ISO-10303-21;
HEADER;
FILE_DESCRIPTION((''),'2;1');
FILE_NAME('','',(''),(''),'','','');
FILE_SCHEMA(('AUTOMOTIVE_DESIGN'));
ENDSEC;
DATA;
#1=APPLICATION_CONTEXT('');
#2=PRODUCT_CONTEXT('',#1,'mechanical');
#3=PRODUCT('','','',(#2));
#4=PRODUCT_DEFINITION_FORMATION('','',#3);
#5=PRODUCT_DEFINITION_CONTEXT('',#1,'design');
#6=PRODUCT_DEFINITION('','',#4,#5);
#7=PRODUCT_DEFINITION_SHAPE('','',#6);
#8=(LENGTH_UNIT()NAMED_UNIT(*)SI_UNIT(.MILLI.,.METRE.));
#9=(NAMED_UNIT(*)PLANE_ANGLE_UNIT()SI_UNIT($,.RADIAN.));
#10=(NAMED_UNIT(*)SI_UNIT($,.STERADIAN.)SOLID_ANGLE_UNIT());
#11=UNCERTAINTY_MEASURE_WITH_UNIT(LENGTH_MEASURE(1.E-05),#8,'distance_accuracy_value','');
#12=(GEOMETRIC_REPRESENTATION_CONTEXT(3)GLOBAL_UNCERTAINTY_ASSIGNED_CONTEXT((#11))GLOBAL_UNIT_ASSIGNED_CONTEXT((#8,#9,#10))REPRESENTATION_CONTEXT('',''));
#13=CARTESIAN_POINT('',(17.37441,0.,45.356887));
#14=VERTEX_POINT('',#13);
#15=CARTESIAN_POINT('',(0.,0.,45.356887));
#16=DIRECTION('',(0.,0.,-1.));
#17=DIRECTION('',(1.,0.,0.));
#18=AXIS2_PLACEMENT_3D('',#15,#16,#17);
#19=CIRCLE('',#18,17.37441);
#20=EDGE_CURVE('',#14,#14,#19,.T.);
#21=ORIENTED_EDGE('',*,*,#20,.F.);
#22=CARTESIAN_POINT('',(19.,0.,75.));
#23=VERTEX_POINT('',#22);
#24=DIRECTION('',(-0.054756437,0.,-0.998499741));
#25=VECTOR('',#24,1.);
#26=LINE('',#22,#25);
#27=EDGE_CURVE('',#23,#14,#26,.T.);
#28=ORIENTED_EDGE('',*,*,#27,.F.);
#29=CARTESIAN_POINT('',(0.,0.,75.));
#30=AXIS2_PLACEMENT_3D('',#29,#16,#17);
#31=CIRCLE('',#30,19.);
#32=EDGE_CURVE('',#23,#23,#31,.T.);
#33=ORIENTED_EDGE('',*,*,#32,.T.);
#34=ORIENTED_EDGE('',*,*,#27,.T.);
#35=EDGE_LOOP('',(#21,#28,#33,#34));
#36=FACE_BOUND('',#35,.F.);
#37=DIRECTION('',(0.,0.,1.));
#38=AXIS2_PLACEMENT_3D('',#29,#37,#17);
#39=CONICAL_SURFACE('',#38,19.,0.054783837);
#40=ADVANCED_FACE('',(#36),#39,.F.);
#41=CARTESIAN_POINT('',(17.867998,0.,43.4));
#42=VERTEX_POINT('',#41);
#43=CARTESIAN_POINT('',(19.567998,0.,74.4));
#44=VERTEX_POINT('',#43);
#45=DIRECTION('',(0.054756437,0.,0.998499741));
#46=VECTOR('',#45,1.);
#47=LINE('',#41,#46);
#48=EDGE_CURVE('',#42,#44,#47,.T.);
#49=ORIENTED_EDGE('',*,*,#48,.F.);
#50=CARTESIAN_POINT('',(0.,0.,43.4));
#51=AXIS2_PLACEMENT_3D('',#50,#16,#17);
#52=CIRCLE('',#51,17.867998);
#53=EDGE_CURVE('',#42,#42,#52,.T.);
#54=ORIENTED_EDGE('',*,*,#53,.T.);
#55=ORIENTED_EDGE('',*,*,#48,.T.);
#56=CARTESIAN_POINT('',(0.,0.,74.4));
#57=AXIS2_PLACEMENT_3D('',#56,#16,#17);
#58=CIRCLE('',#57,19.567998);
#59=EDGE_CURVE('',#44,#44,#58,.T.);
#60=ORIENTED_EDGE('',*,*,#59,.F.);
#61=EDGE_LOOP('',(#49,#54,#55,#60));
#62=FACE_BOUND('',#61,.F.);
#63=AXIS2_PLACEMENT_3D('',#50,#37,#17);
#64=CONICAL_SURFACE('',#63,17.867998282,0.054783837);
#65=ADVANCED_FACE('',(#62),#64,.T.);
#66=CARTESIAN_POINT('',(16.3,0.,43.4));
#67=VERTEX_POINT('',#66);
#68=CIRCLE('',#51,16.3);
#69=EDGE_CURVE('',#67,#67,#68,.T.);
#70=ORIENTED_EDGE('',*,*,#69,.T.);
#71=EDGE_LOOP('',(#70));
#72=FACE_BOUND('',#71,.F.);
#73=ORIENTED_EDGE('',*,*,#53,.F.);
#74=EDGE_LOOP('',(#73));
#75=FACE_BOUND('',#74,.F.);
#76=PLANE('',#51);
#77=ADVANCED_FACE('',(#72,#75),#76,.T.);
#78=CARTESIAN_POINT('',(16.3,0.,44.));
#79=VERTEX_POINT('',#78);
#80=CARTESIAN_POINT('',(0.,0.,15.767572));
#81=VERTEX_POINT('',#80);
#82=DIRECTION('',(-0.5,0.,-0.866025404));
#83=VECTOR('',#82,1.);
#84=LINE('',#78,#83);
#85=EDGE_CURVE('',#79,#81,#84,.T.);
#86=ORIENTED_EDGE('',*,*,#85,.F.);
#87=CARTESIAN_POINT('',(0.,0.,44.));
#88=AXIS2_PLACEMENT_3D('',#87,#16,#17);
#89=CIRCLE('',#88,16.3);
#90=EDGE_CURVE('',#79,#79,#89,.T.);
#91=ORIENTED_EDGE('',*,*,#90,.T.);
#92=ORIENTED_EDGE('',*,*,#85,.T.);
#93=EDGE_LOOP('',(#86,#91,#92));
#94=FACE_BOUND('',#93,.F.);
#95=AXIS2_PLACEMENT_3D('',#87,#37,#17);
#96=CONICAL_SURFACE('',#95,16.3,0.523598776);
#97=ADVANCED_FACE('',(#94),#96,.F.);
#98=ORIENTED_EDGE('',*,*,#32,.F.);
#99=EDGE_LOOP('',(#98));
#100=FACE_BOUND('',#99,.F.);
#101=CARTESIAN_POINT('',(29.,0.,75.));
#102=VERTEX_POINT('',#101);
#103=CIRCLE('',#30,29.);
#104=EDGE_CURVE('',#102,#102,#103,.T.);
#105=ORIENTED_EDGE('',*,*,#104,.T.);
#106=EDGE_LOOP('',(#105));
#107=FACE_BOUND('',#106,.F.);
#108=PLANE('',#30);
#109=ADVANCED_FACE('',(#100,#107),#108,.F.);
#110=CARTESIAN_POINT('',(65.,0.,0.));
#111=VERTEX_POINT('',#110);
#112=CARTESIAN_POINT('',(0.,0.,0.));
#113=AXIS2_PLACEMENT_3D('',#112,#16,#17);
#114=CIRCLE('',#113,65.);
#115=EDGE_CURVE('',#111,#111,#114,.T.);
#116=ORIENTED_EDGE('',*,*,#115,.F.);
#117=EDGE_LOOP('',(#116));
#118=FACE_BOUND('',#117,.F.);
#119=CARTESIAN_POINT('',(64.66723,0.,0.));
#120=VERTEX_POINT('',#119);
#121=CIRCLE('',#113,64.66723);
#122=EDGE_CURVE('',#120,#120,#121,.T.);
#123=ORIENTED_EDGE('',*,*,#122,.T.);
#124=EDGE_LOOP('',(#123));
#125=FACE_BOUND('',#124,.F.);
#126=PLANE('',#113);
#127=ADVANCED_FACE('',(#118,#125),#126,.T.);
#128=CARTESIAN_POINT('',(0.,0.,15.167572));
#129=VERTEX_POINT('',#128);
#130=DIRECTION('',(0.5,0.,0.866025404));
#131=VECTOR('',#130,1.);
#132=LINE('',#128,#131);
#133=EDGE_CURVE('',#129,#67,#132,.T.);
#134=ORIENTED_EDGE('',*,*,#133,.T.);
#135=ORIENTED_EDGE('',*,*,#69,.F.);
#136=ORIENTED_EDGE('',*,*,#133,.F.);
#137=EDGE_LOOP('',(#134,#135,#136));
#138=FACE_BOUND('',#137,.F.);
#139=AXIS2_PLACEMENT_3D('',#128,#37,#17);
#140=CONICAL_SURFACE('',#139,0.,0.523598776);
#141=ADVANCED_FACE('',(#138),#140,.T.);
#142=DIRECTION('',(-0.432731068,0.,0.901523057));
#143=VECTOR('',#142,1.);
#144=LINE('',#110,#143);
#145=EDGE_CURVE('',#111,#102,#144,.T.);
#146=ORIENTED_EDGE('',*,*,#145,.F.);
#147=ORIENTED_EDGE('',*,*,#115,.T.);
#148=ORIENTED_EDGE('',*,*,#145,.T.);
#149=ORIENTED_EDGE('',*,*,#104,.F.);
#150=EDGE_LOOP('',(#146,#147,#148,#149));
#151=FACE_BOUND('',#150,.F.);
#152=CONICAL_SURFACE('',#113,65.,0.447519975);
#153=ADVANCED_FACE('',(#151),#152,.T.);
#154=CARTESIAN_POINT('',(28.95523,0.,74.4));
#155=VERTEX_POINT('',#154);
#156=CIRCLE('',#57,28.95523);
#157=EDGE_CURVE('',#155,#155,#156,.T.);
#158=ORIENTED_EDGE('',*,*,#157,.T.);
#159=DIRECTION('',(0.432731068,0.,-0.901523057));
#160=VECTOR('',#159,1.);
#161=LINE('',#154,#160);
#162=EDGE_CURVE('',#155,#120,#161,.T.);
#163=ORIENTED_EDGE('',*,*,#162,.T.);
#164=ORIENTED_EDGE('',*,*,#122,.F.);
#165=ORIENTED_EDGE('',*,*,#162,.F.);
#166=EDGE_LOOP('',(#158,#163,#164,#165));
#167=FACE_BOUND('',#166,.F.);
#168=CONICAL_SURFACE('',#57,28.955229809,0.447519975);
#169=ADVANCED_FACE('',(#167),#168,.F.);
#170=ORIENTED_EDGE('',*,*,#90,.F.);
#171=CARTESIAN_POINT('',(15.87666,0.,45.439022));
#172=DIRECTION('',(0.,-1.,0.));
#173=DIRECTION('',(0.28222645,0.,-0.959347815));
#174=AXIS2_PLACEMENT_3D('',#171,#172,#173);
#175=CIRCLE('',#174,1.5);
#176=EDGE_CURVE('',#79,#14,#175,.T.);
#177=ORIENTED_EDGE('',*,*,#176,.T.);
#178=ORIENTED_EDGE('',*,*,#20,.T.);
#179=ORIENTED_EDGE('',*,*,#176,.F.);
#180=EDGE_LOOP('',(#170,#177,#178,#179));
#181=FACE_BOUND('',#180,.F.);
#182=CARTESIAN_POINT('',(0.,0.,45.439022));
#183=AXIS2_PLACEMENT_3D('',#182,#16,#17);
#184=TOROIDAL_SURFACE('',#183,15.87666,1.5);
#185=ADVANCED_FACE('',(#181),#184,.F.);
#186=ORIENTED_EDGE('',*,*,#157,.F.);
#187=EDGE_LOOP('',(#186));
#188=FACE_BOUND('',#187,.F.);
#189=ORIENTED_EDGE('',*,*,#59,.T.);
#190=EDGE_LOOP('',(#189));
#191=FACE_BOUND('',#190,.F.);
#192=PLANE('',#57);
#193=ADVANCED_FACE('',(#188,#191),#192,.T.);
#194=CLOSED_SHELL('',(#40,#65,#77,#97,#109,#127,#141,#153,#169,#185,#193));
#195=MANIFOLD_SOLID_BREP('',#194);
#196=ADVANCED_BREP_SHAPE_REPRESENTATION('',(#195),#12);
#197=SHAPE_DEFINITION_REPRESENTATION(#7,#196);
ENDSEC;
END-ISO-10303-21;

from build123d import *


# Not quite as in the source:
# - a fillet or chamfer that OpenCascade refuses, or shapes differently, is made with other operations: its cross-section is extruded or revolved along the edge and cut away or added


with BuildPart() as f1:
    # F0 (on Front) → F1 (revolve)
    with BuildSketch(Plane.XZ):
        Polygon((64.667229809, 0), (65, 0), (29, 75), (19, 75), (17.3, 44), (16.3, 44), (0, 15.7675718366), (0, 15.1675718366), (16.3, 43.4), (17.8679982822, 43.4), (19.5679982822, 74.4), (28.955229809, 74.4), align=None)
    revolve(axis=Axis((0, 0, 43.4963169246), (0, 0, -1)))

    # F2: fillet of radius 1.5 on 1 edges, made by hand

    # F2_s1 → F2_t2 (revolve)
    with BuildSketch(Plane.XZ):
        with BuildLine():
            ThreePointArc((17.3744099359, 45.3568870669), (17.0526414639, 44.5078566678), (16.3, 44))
            Line((16.3, 44), (16.3084667935, 43.9712195655))
            ThreePointArc((16.3084667935, 43.9712195655), (16.8, 43.97), (17.3, 43.97))
            Line((17.3, 43.97), (17.3299549922, 43.9983573069))
            Line((17.3299549922, 43.9983573069), (17.4043649282, 45.3552443738))
            Line((17.4043649282, 45.3552443738), (17.3744099359, 45.3568870669))
        make_face()
    revolve(axis=Axis((0, 0, 44), (0, 0, -1)))


solid = f1.part
